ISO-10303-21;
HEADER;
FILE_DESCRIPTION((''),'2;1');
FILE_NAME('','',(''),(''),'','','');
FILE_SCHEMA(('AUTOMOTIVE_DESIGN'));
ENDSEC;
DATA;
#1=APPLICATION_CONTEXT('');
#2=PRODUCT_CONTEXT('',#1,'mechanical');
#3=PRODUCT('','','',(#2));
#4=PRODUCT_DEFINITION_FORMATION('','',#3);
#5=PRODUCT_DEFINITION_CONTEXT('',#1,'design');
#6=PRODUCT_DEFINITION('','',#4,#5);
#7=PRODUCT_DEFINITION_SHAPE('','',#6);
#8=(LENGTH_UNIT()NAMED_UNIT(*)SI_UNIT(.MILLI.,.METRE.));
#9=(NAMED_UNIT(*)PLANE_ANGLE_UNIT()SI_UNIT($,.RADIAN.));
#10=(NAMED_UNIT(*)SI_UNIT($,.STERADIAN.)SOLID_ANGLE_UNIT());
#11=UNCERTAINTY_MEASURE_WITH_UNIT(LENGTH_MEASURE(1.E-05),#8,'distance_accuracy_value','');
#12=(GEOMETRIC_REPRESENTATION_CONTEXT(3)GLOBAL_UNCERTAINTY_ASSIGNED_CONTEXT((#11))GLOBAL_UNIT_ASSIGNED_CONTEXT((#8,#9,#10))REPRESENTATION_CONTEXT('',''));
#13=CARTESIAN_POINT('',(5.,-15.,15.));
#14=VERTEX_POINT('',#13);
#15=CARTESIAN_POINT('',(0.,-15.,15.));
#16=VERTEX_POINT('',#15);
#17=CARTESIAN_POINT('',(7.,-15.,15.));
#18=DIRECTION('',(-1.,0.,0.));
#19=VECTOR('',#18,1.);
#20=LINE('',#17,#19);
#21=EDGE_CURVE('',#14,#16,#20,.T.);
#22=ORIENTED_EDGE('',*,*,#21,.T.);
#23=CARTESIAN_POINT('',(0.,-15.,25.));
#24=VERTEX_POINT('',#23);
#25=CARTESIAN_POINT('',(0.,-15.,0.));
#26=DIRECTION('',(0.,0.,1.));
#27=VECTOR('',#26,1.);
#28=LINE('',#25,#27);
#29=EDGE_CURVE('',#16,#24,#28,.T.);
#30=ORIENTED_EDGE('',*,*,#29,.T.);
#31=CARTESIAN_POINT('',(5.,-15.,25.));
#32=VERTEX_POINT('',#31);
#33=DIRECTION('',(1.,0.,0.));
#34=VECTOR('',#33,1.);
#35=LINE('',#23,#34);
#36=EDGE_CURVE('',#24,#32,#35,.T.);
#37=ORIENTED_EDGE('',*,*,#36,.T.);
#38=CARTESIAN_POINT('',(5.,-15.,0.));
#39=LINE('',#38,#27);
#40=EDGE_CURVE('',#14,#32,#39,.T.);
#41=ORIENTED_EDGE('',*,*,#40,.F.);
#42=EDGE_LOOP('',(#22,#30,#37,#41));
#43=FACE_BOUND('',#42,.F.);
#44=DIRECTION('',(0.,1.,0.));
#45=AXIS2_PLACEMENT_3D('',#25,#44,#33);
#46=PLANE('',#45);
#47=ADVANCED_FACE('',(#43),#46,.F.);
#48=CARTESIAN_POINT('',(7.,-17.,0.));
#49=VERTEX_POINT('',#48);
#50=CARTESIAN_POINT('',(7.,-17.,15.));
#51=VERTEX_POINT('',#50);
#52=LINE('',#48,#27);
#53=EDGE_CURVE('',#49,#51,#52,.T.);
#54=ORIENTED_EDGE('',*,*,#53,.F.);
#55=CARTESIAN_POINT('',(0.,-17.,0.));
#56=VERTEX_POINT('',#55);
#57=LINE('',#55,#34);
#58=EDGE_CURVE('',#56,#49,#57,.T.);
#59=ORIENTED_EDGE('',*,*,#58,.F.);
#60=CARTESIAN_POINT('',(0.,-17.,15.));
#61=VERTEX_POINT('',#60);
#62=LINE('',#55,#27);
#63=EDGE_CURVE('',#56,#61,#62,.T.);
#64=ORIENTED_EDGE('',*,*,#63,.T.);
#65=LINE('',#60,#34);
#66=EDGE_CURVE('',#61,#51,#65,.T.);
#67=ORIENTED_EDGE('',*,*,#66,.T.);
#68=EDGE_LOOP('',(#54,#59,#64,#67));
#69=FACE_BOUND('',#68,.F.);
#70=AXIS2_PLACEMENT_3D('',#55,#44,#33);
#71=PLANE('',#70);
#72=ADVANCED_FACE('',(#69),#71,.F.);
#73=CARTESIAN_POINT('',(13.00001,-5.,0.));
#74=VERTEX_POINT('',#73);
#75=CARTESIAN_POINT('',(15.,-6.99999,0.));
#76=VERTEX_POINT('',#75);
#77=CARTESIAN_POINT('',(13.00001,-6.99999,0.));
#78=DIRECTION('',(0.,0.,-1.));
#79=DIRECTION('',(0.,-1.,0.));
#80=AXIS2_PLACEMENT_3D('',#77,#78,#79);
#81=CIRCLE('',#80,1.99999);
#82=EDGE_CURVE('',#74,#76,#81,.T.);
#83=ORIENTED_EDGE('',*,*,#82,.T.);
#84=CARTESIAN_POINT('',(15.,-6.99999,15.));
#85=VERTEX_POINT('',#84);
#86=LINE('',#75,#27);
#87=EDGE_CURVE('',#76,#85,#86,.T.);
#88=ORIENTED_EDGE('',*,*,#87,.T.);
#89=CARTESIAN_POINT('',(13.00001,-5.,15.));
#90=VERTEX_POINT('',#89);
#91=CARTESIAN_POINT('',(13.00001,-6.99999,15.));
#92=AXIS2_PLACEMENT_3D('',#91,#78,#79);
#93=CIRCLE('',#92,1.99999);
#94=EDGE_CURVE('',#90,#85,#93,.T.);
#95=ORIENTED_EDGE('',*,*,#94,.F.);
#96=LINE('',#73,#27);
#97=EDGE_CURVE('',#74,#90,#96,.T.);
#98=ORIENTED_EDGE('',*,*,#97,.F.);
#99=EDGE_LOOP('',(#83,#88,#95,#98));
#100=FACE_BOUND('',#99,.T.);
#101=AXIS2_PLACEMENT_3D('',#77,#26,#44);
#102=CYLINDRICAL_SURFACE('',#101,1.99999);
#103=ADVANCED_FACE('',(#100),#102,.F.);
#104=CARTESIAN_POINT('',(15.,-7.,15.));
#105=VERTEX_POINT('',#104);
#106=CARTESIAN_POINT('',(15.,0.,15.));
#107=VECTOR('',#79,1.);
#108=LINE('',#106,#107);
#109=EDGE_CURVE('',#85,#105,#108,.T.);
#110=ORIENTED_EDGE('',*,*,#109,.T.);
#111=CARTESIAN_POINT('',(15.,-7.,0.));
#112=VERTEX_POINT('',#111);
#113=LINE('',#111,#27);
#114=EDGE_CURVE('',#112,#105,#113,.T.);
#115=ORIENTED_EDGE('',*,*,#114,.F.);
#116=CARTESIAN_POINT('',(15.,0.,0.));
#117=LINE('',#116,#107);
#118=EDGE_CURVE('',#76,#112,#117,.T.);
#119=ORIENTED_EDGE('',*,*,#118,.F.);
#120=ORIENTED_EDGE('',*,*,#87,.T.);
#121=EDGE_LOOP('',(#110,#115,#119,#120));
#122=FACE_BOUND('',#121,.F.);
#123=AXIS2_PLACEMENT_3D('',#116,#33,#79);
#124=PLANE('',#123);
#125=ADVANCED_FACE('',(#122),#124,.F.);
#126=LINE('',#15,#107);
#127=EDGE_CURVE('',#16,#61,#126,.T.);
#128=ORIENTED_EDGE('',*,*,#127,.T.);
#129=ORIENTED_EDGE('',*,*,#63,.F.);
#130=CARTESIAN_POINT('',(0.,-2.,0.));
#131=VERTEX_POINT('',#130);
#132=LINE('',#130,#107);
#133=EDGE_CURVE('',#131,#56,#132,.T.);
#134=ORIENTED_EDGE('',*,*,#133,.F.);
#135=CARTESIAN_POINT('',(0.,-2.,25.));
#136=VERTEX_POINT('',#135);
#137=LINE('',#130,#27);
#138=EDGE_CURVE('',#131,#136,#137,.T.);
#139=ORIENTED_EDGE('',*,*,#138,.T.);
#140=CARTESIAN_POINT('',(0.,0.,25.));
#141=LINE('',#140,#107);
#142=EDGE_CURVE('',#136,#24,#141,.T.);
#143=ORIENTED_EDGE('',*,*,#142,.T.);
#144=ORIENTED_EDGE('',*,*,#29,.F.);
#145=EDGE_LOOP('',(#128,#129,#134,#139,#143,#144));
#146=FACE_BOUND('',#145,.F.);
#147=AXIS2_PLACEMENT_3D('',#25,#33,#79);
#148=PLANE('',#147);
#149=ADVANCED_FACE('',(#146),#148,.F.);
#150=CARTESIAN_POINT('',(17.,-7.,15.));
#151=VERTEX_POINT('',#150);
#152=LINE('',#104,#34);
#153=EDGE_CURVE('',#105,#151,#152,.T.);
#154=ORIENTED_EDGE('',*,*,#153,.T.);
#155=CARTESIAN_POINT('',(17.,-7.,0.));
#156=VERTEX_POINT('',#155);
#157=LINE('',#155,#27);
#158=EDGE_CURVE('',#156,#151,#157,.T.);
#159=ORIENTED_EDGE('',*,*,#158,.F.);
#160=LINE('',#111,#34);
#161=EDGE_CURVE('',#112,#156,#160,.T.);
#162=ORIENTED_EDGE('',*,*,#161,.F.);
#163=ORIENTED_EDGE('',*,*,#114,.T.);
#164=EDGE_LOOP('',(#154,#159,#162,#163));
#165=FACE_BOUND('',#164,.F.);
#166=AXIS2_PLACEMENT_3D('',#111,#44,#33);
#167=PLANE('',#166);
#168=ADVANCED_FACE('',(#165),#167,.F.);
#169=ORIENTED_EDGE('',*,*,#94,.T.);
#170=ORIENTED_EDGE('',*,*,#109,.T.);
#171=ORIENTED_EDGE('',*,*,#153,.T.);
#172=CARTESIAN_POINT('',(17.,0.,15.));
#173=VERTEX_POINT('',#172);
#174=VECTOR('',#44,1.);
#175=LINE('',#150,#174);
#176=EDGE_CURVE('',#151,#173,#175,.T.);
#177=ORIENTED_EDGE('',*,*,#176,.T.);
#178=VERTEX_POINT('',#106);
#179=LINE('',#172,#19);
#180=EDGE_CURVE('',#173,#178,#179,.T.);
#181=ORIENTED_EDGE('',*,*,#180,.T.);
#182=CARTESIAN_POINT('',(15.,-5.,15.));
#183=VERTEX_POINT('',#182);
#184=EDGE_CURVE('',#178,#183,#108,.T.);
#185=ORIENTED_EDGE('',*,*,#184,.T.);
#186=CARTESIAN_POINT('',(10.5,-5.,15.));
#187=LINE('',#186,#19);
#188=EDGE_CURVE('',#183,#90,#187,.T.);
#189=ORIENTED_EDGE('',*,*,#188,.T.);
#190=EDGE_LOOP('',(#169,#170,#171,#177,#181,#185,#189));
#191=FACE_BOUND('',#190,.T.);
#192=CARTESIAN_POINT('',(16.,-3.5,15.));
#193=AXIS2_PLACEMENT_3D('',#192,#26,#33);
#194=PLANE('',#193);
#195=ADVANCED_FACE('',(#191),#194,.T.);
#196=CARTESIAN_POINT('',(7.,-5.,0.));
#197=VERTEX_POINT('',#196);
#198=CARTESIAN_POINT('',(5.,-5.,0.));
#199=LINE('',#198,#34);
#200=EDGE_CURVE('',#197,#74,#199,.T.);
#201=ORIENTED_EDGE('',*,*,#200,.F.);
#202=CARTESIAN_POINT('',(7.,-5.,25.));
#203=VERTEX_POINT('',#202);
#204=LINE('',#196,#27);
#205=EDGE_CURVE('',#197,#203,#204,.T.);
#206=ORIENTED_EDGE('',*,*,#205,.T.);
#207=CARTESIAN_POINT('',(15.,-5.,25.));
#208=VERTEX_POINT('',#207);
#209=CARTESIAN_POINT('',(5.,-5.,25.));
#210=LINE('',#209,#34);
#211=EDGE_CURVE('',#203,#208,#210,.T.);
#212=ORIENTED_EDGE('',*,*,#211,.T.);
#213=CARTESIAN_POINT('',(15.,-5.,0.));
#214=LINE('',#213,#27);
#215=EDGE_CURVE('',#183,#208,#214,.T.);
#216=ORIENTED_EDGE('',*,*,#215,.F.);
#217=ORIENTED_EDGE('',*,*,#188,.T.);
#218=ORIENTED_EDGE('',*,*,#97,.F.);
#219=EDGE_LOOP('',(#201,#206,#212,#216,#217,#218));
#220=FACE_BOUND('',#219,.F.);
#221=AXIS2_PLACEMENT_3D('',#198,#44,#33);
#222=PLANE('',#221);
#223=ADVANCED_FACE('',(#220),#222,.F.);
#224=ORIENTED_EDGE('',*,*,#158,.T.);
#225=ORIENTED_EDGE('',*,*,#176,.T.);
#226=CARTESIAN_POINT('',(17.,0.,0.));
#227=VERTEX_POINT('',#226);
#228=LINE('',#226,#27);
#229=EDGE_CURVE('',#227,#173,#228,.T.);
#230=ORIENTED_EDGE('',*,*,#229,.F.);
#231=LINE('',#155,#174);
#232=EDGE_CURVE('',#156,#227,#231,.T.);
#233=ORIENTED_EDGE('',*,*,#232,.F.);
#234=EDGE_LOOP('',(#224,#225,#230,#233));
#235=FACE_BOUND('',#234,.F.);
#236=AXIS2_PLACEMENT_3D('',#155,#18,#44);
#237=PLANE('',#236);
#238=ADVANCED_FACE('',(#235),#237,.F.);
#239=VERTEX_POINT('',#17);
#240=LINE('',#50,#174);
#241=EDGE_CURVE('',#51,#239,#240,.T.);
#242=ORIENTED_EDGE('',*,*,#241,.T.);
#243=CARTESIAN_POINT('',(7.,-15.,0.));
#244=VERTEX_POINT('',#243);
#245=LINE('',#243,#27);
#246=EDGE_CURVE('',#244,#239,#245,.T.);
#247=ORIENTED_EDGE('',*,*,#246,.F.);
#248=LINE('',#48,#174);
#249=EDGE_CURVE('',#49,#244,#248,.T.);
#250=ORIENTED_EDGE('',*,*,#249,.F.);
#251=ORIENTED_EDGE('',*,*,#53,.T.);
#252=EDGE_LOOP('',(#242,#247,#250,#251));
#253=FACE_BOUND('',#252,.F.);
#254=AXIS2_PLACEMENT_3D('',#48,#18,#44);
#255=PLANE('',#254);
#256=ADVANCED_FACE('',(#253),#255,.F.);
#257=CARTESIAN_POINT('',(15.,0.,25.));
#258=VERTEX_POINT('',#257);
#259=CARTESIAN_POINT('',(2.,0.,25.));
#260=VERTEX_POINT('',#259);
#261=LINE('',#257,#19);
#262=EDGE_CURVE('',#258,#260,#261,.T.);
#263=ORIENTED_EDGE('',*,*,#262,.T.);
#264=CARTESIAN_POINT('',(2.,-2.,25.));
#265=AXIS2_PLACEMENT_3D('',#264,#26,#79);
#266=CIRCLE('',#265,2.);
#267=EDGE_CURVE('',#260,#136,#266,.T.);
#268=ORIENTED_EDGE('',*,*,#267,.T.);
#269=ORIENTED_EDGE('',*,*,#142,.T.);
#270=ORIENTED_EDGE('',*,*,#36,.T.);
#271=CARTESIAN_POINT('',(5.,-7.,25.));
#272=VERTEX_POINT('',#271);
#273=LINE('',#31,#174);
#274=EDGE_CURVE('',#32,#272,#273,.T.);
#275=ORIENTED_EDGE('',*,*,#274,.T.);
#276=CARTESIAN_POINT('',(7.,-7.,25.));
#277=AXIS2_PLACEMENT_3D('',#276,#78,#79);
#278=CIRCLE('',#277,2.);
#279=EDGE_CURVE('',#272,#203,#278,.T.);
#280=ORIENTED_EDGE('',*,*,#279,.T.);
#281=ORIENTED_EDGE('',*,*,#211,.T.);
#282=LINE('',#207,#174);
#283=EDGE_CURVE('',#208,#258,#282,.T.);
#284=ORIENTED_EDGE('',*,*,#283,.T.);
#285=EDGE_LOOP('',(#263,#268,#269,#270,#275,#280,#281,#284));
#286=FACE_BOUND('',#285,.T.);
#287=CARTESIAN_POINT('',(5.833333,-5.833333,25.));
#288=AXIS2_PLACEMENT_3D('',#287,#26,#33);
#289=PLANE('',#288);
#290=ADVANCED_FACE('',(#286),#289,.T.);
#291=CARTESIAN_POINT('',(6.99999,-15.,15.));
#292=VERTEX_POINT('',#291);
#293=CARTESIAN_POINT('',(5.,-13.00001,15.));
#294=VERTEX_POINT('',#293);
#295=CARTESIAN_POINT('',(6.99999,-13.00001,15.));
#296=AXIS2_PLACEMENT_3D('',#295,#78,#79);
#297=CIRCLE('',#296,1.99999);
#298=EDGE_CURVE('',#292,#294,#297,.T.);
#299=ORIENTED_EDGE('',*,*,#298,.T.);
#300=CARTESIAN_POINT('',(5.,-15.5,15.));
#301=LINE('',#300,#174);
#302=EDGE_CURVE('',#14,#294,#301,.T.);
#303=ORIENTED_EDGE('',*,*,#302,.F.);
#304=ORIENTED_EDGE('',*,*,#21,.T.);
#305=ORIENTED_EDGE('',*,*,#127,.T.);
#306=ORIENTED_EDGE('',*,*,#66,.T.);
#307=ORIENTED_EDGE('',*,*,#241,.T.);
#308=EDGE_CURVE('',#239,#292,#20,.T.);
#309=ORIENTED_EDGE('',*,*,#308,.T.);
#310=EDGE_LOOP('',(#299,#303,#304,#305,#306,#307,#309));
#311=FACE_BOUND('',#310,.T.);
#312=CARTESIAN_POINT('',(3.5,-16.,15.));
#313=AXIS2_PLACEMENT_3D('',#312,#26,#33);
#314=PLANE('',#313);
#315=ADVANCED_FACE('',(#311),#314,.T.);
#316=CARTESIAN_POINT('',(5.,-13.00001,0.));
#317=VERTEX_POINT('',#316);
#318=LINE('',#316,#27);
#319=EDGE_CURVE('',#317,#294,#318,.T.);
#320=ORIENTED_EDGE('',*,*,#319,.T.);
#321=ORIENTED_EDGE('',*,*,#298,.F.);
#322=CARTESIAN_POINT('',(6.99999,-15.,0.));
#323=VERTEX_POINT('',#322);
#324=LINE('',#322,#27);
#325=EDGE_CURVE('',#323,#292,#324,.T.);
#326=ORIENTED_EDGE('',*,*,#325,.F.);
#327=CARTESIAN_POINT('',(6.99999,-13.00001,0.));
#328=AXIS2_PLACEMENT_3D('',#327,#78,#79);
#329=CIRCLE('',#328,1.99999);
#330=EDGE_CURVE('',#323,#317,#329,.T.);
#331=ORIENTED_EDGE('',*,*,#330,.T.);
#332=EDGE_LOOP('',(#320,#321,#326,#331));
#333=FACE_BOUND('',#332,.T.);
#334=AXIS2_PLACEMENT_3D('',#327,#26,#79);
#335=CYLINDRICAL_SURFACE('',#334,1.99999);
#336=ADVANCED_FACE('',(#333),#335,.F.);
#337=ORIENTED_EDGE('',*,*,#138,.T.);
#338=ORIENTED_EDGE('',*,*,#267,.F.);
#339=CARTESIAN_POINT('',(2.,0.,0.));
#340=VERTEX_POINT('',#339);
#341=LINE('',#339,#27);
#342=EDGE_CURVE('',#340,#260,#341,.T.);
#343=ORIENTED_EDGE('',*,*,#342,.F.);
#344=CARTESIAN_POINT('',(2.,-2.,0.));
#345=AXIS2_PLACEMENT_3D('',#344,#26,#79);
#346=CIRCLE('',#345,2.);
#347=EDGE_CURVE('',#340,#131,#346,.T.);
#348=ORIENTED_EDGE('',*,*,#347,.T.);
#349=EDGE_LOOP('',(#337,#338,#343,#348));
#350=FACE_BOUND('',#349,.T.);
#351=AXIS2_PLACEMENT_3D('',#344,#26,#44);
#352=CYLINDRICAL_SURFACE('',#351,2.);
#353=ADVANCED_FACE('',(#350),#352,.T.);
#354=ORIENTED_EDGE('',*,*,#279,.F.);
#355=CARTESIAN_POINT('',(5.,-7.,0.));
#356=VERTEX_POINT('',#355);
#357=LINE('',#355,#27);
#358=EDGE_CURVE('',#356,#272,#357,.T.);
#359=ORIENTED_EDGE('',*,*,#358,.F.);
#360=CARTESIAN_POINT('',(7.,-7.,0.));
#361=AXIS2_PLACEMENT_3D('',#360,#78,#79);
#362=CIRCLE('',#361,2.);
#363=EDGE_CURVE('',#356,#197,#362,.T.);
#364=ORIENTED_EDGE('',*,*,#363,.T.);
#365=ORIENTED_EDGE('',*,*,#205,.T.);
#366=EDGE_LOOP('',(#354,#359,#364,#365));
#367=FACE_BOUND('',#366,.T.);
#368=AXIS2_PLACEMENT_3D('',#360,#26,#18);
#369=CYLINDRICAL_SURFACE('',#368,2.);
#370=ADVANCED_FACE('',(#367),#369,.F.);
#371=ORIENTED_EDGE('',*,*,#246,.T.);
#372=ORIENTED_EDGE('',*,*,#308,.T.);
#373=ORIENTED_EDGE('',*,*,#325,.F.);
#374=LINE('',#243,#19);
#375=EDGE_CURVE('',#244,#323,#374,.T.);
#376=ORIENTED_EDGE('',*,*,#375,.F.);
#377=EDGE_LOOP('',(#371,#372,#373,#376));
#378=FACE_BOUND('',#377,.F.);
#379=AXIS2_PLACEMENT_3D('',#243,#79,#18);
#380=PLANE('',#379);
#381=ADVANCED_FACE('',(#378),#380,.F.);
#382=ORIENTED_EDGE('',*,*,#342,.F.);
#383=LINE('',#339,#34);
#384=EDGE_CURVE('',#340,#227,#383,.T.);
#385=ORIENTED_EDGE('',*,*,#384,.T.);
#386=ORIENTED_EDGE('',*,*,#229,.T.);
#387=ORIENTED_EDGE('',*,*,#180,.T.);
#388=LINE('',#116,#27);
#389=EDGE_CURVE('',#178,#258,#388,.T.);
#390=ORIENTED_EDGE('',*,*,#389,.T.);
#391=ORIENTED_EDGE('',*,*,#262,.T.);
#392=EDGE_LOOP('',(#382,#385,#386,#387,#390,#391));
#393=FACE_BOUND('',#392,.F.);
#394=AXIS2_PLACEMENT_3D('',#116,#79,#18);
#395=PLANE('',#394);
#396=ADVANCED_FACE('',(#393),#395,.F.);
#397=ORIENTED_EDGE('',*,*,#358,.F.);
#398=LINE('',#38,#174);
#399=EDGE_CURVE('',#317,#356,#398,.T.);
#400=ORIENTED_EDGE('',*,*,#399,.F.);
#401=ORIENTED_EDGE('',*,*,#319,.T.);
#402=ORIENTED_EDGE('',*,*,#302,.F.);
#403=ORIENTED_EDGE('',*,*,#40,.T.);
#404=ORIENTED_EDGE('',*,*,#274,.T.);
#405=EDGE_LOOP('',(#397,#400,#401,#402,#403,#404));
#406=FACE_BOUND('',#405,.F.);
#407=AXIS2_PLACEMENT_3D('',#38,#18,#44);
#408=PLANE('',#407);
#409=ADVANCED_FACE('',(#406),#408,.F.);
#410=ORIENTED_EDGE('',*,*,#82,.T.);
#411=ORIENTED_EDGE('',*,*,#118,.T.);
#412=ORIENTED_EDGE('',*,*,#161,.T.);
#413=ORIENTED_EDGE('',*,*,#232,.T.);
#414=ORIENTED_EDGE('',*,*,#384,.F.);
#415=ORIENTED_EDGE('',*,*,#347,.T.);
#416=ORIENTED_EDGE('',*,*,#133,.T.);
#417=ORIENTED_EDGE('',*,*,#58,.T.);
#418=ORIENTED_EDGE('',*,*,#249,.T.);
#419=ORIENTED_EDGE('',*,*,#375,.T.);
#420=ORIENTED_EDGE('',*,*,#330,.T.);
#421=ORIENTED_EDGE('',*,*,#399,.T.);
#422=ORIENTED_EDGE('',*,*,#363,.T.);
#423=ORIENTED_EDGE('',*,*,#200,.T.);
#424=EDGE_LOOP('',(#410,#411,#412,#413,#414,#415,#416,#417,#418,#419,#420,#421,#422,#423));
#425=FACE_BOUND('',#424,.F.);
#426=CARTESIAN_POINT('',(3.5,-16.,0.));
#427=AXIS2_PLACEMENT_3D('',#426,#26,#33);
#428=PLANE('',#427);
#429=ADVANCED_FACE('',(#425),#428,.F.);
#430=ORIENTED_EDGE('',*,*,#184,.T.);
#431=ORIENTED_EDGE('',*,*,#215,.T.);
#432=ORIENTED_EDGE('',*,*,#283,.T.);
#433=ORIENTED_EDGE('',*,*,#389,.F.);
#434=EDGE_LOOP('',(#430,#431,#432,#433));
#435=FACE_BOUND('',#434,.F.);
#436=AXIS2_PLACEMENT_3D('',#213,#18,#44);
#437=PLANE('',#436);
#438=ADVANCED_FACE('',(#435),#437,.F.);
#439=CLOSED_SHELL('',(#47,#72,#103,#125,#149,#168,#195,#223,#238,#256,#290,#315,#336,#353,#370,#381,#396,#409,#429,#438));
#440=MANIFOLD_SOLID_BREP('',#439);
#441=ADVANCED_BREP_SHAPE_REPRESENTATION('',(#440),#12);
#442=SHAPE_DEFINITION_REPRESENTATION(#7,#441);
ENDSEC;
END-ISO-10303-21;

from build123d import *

# Parameters (mm, degrees)
F1_DEPTH = 25
F2_R     = 2
F3_DEPTH = 15
F4_R     = 1.99999


# Not quite as in the source:
# - a fillet or chamfer is up to 0.001 mm smaller than in the source, because OpenCascade refuses the exact size


with BuildPart() as f1:
    # F0 (on Top) → F1 (new body)
    with BuildSketch(Plane.XY):
        Polygon((15, 0), (0, 0), (0, -15), (5, -15), (5, -5), (15, -5), align=None)
    extrude(amount=F1_DEPTH)

    # F2
    f2_edges = [f1.edges().sort_by_distance(p)[0] for p in [
        (5, -5, 12.5),
        (0, 0, 12.5),
    ]]
    fillet(f2_edges, radius=F2_R)

    # F0 (on Top) → F3 (join)
    with BuildSketch(Plane.XY):
        Polygon((5, -15), (0, -15), (0, -17), (7, -17), (7, -15), align=None)
        Polygon((17, 0), (15, 0), (15, -5), (15, -7), (17, -7), align=None)
    extrude(amount=F3_DEPTH)

    # F4 (radius 2 in the source; OpenCascade refuses exactly that, so slightly less here)
    f4_edges = [f1.edges().sort_by_distance(p)[0] for p in [
        (5, -15, 7.5),
        (15, -5, 7.5),
    ]]
    fillet(f4_edges, radius=F4_R)


solid = f1.part
